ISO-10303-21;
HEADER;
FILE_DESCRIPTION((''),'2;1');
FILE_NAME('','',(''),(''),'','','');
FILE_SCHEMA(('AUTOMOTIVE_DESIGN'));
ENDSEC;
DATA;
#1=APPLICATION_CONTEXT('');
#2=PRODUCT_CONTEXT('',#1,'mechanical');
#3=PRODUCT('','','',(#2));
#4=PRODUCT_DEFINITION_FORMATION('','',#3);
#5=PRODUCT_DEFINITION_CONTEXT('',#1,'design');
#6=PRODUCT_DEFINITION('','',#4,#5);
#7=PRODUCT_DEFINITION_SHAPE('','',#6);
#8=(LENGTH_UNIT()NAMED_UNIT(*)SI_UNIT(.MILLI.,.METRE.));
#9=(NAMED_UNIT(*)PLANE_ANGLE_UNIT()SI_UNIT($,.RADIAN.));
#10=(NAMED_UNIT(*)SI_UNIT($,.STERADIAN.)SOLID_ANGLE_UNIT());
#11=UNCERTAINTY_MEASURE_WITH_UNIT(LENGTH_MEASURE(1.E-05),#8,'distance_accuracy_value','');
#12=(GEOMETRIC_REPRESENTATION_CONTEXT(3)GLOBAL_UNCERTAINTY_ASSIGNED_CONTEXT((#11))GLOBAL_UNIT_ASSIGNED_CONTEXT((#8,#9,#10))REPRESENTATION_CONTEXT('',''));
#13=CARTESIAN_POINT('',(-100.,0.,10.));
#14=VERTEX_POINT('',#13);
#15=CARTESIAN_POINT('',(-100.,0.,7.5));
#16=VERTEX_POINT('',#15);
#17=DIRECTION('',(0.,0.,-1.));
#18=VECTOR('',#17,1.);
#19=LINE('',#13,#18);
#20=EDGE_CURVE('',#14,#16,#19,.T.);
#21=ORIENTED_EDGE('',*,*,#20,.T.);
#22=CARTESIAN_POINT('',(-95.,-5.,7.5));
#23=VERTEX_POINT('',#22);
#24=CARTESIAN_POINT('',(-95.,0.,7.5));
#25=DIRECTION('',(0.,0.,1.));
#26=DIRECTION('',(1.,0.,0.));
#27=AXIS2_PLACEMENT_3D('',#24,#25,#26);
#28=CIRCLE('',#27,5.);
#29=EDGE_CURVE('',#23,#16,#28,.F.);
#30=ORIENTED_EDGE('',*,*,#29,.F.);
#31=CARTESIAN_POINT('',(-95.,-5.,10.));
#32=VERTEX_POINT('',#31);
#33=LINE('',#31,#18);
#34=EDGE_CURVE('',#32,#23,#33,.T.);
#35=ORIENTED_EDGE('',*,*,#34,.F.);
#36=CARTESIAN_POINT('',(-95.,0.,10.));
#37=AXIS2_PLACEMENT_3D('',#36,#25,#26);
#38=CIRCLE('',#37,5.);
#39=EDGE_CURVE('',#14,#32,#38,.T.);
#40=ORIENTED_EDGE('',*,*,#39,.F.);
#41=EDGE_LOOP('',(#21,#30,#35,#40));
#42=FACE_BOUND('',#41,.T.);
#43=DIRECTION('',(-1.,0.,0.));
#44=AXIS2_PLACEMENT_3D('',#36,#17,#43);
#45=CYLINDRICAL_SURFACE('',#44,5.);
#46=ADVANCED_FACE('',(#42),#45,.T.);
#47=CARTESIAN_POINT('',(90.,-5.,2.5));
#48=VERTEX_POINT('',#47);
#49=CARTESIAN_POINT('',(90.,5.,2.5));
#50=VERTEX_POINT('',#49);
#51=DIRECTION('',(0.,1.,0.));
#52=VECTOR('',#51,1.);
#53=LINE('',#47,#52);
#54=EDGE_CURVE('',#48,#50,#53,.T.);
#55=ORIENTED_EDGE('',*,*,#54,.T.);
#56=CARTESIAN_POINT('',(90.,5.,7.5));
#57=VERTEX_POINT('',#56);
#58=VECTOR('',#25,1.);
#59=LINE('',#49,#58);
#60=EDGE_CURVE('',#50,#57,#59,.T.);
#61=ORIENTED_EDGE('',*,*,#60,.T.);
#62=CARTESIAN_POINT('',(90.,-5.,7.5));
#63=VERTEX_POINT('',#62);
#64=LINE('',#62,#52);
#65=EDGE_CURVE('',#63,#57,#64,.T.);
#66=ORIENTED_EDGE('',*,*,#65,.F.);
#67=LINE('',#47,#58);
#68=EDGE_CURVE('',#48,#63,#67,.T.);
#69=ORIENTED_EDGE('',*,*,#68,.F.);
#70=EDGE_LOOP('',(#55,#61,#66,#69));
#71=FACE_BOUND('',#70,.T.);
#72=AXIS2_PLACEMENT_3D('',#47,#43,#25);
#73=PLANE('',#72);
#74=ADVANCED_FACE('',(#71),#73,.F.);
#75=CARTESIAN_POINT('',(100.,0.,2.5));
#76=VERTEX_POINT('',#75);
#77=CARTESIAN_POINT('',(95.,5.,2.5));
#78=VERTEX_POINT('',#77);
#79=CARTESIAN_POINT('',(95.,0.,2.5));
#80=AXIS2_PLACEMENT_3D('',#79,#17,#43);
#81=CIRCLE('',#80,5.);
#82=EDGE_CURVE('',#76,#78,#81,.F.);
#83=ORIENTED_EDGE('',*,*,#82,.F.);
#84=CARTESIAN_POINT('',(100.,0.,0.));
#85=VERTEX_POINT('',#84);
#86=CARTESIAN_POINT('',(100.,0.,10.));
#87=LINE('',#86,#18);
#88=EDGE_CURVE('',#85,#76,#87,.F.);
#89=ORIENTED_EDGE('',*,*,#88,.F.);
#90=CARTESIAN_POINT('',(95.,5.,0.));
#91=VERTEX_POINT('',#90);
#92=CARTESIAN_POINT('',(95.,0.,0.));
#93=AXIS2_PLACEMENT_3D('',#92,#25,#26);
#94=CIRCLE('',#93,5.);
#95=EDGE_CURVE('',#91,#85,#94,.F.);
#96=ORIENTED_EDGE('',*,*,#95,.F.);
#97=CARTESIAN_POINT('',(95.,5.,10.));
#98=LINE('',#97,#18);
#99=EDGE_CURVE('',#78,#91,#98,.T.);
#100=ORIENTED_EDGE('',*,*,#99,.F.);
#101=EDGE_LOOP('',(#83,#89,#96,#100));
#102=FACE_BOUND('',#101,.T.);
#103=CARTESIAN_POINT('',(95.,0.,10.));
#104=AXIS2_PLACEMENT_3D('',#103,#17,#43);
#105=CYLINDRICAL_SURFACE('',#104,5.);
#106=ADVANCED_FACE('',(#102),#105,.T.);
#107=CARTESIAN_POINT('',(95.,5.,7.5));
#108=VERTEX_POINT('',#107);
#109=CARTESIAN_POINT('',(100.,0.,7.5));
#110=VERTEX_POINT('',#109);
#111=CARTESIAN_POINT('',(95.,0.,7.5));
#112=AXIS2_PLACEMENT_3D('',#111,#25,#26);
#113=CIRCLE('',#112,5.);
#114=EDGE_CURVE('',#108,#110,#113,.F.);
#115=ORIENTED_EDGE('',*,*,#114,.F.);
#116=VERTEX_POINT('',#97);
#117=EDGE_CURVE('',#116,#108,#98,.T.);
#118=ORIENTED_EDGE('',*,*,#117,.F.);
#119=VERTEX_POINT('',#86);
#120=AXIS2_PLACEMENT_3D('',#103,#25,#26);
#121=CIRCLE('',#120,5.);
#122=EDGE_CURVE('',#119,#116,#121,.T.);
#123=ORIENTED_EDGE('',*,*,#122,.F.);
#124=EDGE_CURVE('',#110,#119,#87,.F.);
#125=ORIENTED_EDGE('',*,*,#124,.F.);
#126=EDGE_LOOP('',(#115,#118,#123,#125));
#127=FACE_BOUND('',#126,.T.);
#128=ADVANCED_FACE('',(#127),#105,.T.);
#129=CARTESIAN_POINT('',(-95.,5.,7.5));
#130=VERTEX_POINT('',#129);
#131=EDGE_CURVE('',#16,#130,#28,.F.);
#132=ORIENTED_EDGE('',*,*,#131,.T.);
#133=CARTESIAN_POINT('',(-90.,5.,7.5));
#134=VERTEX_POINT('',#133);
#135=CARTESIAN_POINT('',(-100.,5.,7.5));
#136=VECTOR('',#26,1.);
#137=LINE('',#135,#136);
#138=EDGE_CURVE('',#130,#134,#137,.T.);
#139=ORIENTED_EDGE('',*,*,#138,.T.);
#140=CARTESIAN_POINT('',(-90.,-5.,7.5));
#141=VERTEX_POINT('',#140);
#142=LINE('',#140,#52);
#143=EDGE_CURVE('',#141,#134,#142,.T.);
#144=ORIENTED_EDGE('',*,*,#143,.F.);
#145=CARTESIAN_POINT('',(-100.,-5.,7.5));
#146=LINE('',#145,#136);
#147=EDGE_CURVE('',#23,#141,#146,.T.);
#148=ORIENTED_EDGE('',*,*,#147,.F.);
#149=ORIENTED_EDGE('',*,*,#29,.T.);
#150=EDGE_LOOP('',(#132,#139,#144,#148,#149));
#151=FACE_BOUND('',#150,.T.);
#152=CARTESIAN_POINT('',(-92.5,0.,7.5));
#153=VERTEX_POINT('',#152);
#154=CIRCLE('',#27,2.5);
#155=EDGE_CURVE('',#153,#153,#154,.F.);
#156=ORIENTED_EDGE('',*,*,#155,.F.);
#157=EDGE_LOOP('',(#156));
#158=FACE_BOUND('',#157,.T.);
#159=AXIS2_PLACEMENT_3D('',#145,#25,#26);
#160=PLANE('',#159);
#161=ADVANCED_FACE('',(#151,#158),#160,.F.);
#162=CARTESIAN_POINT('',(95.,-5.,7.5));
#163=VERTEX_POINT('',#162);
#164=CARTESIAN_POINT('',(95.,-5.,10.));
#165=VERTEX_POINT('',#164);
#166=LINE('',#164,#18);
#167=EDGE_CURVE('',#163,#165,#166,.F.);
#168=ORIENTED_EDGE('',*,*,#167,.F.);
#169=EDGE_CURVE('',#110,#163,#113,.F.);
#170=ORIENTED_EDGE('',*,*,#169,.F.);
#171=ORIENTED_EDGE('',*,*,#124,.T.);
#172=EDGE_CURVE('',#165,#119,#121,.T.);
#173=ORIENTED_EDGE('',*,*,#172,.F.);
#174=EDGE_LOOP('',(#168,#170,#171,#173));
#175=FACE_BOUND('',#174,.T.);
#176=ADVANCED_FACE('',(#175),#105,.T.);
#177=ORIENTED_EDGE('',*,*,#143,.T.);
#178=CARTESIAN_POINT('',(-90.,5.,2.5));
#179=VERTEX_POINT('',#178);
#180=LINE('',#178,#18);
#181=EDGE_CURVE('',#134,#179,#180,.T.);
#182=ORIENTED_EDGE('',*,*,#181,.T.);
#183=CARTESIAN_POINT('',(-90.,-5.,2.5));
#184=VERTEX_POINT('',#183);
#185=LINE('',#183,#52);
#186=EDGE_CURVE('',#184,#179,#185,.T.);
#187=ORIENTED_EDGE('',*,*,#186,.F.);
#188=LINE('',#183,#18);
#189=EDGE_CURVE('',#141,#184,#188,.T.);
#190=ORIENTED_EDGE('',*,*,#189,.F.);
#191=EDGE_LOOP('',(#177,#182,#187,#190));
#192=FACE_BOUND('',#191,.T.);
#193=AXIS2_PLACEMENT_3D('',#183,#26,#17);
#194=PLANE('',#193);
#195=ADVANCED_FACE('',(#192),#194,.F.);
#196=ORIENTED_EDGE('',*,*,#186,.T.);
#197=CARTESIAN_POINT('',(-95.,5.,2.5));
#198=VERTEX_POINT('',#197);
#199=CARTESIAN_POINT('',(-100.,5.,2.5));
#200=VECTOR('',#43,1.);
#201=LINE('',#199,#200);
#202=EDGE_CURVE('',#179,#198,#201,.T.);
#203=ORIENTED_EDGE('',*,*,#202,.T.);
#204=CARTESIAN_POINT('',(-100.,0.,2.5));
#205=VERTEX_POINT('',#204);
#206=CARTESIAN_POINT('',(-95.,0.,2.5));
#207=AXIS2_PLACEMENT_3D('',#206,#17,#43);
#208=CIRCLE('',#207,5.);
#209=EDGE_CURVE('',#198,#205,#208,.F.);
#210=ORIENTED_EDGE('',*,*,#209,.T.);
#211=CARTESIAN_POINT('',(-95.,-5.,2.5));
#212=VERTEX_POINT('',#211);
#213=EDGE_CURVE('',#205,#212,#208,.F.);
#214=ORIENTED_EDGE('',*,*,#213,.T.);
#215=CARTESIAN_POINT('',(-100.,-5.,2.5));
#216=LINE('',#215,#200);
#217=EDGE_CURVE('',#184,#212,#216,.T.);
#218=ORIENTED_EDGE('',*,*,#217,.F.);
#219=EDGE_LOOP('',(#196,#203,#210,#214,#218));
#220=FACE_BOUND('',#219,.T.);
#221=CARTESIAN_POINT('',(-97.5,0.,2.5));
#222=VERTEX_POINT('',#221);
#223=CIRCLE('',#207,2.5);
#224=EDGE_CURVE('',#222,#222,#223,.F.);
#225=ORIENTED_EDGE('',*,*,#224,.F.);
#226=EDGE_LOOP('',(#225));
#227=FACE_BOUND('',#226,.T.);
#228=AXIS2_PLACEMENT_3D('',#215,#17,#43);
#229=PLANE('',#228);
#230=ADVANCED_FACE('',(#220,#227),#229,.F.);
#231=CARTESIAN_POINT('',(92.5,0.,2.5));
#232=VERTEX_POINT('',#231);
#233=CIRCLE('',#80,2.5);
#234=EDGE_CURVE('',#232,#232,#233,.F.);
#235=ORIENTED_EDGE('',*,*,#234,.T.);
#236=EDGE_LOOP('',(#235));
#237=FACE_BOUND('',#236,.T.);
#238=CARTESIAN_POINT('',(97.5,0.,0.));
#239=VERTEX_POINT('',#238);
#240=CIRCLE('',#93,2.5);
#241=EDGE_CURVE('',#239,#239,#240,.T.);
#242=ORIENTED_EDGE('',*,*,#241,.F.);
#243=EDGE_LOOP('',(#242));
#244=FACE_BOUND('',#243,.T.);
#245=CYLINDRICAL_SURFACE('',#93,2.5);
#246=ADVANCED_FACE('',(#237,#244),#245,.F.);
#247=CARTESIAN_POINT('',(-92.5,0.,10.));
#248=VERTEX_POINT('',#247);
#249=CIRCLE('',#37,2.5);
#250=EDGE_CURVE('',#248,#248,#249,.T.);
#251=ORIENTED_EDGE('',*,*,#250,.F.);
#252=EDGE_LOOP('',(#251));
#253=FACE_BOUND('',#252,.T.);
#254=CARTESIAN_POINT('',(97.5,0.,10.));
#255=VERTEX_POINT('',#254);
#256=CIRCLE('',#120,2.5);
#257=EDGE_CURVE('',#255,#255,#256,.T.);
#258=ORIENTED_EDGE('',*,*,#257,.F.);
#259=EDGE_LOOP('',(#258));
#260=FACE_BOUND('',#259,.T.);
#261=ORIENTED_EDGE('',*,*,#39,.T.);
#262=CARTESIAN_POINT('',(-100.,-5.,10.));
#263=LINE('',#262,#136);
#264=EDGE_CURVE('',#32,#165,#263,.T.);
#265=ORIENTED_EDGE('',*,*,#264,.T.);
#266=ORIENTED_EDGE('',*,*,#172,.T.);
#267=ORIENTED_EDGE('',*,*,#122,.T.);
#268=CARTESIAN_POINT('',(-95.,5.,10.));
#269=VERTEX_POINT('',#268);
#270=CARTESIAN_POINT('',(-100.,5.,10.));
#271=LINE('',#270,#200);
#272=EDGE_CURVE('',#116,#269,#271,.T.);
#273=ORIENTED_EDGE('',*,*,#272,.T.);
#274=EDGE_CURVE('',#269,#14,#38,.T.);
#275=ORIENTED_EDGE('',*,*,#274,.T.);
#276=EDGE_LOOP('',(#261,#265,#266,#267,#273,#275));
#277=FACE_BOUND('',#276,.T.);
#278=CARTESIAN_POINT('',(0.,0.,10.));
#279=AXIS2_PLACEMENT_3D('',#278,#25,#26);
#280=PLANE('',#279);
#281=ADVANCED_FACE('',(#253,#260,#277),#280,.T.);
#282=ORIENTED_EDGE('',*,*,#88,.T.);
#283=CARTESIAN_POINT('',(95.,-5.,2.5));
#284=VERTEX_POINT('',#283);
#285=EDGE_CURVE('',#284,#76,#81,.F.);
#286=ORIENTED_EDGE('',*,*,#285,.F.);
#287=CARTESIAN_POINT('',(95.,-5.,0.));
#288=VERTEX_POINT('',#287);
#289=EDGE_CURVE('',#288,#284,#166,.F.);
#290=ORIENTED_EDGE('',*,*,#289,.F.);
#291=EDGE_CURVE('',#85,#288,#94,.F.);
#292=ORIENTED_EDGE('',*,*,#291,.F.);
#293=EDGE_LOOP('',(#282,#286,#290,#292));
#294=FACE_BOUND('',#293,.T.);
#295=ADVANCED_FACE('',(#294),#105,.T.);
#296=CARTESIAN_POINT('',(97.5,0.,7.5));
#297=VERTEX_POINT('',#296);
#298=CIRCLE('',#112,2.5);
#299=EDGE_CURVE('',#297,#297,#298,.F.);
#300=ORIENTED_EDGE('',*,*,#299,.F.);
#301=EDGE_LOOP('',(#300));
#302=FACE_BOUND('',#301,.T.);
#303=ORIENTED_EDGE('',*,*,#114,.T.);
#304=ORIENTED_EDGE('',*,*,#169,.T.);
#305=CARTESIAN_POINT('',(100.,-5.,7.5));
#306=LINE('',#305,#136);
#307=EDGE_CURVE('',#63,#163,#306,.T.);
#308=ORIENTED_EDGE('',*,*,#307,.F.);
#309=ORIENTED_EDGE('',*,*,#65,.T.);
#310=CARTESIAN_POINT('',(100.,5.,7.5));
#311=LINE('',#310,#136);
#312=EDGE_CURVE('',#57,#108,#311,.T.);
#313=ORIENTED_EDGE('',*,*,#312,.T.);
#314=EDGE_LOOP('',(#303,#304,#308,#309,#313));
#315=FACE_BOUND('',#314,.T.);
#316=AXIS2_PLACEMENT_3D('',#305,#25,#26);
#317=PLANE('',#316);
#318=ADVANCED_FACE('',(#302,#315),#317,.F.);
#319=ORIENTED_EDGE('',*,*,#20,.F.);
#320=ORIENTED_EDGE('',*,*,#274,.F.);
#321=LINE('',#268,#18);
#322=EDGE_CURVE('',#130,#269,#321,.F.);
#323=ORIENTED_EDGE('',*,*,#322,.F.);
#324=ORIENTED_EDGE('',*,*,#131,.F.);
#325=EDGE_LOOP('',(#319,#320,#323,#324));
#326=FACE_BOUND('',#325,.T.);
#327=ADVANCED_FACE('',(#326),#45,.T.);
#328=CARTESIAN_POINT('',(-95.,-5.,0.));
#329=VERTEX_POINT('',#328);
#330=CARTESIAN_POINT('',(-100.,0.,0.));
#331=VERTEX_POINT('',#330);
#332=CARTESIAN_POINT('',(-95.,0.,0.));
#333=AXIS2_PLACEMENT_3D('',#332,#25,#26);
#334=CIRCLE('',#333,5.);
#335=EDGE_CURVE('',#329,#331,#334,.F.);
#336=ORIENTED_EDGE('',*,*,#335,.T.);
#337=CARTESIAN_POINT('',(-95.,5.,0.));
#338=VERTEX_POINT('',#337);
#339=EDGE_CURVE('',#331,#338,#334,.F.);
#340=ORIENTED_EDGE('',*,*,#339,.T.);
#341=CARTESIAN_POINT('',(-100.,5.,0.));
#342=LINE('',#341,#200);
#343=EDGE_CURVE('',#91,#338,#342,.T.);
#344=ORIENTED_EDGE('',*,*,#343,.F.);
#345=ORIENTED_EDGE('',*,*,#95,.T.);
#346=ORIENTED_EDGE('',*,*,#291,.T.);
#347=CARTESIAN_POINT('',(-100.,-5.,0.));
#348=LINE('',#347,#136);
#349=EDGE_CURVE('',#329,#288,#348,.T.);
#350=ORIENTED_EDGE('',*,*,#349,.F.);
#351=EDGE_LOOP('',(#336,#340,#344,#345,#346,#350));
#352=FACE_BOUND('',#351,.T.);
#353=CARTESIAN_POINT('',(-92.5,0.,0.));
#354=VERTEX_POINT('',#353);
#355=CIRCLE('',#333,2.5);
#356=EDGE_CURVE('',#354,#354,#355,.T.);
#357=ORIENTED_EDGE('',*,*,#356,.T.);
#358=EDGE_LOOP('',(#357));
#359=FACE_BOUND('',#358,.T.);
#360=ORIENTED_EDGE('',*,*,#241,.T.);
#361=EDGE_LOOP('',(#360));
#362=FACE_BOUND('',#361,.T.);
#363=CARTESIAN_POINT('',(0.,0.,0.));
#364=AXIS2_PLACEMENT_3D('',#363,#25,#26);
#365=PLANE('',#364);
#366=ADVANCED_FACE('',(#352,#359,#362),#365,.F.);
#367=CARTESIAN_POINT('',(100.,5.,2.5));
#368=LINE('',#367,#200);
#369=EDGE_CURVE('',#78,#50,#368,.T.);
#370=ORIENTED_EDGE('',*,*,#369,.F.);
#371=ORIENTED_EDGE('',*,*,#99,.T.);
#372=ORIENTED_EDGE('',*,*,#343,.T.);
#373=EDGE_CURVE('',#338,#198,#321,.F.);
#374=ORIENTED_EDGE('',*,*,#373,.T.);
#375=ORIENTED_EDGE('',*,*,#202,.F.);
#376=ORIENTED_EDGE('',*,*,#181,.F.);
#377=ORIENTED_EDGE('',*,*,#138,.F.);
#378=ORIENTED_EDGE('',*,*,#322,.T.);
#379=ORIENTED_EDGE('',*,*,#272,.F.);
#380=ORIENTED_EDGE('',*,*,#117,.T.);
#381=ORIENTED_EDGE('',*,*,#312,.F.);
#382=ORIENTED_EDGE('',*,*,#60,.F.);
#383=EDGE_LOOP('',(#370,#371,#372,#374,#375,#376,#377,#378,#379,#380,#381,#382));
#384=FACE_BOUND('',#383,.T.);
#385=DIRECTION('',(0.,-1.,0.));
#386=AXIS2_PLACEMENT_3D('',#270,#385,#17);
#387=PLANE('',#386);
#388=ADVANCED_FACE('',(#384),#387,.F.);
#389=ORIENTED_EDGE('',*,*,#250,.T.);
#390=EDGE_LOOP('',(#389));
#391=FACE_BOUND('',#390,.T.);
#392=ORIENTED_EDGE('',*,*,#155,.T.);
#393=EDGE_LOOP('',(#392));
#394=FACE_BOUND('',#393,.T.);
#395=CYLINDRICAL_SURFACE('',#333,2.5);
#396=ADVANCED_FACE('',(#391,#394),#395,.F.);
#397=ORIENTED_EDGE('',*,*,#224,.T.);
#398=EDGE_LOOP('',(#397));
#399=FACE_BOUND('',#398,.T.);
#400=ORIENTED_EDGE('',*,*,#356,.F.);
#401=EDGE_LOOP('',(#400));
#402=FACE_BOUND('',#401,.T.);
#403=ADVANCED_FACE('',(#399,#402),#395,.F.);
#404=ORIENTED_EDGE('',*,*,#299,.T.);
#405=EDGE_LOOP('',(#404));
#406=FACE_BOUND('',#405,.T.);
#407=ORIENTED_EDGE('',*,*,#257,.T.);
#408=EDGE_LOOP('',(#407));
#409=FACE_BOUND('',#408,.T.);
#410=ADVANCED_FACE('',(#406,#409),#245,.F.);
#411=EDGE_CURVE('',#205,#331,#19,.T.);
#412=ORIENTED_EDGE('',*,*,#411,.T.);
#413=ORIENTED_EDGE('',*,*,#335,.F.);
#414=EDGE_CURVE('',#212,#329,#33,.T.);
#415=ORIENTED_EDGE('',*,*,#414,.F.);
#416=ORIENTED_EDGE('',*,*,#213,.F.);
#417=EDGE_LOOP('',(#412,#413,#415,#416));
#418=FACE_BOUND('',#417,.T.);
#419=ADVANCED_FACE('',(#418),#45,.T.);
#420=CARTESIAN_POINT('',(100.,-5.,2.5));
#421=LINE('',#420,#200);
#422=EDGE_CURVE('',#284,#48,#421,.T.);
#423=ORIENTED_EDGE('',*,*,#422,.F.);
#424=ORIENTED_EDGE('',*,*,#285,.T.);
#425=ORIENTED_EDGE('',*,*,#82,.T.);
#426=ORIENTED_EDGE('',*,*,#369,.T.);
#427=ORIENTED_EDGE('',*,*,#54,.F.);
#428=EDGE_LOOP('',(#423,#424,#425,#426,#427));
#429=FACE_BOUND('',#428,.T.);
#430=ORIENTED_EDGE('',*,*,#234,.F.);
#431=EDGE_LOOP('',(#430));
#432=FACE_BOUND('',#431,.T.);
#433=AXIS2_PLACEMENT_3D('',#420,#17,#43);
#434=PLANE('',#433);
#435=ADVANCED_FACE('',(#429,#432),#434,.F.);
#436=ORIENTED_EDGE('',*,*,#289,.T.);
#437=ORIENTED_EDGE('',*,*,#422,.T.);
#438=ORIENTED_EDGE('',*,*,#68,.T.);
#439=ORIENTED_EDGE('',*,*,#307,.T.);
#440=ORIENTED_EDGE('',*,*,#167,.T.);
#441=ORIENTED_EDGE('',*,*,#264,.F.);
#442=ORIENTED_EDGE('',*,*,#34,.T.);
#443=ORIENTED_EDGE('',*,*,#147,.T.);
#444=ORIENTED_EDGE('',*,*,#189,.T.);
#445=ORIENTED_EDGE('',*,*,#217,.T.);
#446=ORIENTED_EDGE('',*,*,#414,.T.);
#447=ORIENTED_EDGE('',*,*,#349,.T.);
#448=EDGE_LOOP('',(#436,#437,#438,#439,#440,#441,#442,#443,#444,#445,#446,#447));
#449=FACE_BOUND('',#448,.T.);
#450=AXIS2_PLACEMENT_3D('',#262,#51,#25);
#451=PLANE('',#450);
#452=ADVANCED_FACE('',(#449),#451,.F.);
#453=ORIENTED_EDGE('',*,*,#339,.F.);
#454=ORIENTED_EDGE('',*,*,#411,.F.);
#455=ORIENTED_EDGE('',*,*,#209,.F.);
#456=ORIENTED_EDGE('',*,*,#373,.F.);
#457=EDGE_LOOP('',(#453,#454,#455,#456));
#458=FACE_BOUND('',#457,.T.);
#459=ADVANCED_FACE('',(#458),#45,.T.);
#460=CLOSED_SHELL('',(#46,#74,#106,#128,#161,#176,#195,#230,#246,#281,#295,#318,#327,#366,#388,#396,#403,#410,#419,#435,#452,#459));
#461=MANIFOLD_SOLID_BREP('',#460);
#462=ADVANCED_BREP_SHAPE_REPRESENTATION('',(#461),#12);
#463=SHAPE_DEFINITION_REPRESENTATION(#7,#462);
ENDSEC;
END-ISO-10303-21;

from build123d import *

# Parameters (mm, degrees)
SKETCH1_W           = 200
SKETCH1_H           = 10
BOSS_EXTRUDE1_DEPTH = 10
FILLET1_R           = 5
SKETCH2_R           = 2.5
CUT_EXTRUDE1_DEPTH  = 10
SKETCH3_W           = 10
SKETCH3_H           = 5
CUT_EXTRUDE2_DEPTH  = 10


with BuildPart() as part:
    # Sketch1 → Boss-Extrude1 (new body)
    with BuildSketch(Plane.XY):
        Rectangle(SKETCH1_W, SKETCH1_H)
    extrude(amount=BOSS_EXTRUDE1_DEPTH)

    # Fillet1
    fillet1_edges = [part.edges().sort_by_distance(p)[0] for p in [
        (-100, -5, 5),
        (-100, 5, 5),
        (100, -5, 5),
        (100, 5, 5),
    ]]
    fillet(fillet1_edges, radius=FILLET1_R - 0.0001)  # a hair under: the kernel refuses the full size

    # Sketch2 → Cut-Extrude1 (cut)
    with BuildSketch(Plane.XY.offset(10)):
        with Locations((95, 0)):
            Circle(SKETCH2_R)
        with Locations((-95, 0)):
            Circle(SKETCH2_R)
    extrude(amount=-CUT_EXTRUDE1_DEPTH, mode=Mode.SUBTRACT)

    # Sketch3 → Cut-Extrude2 (cut)
    with BuildSketch(Plane(origin=(0, 5, 0), x_dir=(1, 0, 0), z_dir=(0, 1, 0))):
        with Locations((-95, -5)):
            Rectangle(SKETCH3_W, SKETCH3_H)
        with Locations((95, -5)):
            Rectangle(SKETCH3_W, SKETCH3_H)
    extrude(amount=-CUT_EXTRUDE2_DEPTH, mode=Mode.SUBTRACT)


solid = part.part
